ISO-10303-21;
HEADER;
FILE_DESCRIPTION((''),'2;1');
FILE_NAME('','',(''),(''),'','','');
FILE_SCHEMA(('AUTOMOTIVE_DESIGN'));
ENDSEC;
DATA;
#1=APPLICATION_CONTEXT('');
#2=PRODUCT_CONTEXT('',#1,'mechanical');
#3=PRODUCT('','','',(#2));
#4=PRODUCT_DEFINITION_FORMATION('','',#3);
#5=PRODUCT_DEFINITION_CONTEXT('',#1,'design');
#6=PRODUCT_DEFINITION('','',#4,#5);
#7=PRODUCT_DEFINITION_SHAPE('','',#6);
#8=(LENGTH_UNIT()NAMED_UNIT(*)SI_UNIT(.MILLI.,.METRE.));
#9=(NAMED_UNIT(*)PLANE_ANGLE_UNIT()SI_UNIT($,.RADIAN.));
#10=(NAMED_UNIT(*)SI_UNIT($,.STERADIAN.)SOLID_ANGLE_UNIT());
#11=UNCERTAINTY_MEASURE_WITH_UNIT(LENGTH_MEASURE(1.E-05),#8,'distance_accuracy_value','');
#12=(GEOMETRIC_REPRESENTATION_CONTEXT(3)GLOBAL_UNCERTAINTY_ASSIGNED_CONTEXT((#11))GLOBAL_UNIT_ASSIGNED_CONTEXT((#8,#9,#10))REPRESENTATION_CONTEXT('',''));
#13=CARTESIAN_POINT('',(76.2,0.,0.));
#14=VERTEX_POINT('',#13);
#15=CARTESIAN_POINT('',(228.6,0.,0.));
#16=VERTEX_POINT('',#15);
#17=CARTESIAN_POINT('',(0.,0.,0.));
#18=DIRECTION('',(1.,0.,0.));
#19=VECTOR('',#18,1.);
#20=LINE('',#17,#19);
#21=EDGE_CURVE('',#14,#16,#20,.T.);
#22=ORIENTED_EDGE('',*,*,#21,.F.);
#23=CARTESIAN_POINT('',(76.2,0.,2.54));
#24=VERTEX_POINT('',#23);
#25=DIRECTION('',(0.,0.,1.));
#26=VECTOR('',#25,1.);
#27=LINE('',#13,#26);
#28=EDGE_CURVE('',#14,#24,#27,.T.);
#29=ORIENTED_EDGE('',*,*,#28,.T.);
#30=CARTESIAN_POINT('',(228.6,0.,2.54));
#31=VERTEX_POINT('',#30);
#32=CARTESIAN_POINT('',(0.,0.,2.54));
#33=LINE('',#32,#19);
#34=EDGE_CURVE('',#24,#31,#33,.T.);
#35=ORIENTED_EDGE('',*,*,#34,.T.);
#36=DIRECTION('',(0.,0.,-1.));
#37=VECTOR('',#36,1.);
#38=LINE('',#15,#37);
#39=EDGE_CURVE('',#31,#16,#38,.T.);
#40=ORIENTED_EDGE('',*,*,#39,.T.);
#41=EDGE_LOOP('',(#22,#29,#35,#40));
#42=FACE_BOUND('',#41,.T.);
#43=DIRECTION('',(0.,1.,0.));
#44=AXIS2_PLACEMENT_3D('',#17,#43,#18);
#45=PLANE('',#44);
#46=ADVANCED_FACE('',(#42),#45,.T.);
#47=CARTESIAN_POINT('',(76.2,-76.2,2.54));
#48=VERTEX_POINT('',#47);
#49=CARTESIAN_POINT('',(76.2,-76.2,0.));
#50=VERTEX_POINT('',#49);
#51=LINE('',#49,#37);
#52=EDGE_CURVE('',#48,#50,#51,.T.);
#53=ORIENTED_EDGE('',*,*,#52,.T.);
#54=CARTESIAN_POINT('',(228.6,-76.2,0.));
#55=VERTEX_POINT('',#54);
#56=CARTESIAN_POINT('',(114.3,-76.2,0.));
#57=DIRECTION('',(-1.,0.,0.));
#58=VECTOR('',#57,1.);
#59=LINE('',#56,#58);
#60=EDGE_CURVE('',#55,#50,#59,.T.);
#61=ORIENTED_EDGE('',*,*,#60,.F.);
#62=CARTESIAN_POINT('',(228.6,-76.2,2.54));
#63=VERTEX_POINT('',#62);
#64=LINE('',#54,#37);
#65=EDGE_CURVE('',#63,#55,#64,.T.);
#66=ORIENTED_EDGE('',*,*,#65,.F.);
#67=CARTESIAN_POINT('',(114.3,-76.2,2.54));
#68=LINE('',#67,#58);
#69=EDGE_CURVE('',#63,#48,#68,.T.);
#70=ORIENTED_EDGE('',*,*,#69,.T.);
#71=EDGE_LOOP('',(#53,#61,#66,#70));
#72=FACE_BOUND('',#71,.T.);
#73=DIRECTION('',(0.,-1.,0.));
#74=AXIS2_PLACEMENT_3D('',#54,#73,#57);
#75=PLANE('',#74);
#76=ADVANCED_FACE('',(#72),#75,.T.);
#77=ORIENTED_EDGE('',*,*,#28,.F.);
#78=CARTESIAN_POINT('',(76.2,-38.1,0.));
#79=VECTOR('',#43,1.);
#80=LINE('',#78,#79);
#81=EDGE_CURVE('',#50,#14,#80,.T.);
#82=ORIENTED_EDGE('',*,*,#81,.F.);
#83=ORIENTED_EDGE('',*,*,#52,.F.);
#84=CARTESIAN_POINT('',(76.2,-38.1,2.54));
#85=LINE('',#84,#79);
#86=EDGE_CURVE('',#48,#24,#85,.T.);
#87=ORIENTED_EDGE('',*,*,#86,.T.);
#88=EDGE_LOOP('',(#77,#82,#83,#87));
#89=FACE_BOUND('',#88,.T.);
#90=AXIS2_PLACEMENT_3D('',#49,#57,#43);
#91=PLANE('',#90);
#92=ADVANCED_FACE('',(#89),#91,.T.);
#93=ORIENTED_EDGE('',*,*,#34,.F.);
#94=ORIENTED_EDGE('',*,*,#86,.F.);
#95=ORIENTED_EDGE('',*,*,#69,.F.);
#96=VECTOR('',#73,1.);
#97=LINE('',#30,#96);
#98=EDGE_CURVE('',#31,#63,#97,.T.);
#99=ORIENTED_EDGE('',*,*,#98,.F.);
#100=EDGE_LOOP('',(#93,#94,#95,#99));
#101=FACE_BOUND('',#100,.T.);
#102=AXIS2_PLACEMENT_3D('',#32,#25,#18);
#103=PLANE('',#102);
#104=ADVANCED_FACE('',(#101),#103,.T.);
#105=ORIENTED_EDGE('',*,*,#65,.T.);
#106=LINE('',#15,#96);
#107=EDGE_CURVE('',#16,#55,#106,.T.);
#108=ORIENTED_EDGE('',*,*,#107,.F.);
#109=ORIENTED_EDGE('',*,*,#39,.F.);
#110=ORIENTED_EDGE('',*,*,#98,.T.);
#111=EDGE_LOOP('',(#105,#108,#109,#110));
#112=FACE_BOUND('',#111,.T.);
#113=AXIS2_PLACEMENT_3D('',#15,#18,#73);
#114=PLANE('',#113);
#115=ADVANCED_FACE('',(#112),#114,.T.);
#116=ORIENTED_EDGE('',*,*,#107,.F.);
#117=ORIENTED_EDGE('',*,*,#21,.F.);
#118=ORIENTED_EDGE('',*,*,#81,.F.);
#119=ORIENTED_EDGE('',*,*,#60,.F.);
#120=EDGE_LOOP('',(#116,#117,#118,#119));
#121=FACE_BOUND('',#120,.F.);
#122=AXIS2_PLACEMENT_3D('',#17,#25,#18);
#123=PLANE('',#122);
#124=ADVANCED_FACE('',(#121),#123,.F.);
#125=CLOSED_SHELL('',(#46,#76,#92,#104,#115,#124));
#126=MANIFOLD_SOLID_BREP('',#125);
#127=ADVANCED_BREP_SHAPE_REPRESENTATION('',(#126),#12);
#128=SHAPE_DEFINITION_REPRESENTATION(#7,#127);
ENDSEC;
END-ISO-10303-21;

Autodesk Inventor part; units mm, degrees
ref_plane "YZ Plane" through (0, 0, 0) normal (1, 0, 0) x (0, 1, 0)
ref_plane "XZ Plane" through (0, 0, 0) normal (0, 1, 0) x (-1, 0, 0)
ref_plane "XY Plane" through (0, 0, 0) normal (0, 0, 1) x (1, 0, 0)
sketch "Sketch1" plane through (0, 0, 0) normal (0, 0, 1) x (1, 0, 0)
  line L0 (0, 0) -> (228.6, 0)
  line L1 (228.6, 0) -> (228.6, -76.2)
  line L2 (228.6, -76.2) -> (0, -76.2)
  line L3 (0, -76.2) -> (0, 0)
  dimension "d0" = 228.6
  dimension "d1" = 76.2
extrude "Extrusion1" add sketch "Sketch1" along normal blind 2.54
sketch "Sketch2" plane through (0, 0, 2.54) normal (0, 0, 1) x (1, 0, 0)
  point P0 (0, 0)
move faces "Move1" translate (76.2, 0, 0) faces at (0, -50.8, 0.8467)
hole "Hole1" at (0, 0, 2.54) direction (0, 0, -1) diameter 6.35 end through all
properties part number "Bopper"
